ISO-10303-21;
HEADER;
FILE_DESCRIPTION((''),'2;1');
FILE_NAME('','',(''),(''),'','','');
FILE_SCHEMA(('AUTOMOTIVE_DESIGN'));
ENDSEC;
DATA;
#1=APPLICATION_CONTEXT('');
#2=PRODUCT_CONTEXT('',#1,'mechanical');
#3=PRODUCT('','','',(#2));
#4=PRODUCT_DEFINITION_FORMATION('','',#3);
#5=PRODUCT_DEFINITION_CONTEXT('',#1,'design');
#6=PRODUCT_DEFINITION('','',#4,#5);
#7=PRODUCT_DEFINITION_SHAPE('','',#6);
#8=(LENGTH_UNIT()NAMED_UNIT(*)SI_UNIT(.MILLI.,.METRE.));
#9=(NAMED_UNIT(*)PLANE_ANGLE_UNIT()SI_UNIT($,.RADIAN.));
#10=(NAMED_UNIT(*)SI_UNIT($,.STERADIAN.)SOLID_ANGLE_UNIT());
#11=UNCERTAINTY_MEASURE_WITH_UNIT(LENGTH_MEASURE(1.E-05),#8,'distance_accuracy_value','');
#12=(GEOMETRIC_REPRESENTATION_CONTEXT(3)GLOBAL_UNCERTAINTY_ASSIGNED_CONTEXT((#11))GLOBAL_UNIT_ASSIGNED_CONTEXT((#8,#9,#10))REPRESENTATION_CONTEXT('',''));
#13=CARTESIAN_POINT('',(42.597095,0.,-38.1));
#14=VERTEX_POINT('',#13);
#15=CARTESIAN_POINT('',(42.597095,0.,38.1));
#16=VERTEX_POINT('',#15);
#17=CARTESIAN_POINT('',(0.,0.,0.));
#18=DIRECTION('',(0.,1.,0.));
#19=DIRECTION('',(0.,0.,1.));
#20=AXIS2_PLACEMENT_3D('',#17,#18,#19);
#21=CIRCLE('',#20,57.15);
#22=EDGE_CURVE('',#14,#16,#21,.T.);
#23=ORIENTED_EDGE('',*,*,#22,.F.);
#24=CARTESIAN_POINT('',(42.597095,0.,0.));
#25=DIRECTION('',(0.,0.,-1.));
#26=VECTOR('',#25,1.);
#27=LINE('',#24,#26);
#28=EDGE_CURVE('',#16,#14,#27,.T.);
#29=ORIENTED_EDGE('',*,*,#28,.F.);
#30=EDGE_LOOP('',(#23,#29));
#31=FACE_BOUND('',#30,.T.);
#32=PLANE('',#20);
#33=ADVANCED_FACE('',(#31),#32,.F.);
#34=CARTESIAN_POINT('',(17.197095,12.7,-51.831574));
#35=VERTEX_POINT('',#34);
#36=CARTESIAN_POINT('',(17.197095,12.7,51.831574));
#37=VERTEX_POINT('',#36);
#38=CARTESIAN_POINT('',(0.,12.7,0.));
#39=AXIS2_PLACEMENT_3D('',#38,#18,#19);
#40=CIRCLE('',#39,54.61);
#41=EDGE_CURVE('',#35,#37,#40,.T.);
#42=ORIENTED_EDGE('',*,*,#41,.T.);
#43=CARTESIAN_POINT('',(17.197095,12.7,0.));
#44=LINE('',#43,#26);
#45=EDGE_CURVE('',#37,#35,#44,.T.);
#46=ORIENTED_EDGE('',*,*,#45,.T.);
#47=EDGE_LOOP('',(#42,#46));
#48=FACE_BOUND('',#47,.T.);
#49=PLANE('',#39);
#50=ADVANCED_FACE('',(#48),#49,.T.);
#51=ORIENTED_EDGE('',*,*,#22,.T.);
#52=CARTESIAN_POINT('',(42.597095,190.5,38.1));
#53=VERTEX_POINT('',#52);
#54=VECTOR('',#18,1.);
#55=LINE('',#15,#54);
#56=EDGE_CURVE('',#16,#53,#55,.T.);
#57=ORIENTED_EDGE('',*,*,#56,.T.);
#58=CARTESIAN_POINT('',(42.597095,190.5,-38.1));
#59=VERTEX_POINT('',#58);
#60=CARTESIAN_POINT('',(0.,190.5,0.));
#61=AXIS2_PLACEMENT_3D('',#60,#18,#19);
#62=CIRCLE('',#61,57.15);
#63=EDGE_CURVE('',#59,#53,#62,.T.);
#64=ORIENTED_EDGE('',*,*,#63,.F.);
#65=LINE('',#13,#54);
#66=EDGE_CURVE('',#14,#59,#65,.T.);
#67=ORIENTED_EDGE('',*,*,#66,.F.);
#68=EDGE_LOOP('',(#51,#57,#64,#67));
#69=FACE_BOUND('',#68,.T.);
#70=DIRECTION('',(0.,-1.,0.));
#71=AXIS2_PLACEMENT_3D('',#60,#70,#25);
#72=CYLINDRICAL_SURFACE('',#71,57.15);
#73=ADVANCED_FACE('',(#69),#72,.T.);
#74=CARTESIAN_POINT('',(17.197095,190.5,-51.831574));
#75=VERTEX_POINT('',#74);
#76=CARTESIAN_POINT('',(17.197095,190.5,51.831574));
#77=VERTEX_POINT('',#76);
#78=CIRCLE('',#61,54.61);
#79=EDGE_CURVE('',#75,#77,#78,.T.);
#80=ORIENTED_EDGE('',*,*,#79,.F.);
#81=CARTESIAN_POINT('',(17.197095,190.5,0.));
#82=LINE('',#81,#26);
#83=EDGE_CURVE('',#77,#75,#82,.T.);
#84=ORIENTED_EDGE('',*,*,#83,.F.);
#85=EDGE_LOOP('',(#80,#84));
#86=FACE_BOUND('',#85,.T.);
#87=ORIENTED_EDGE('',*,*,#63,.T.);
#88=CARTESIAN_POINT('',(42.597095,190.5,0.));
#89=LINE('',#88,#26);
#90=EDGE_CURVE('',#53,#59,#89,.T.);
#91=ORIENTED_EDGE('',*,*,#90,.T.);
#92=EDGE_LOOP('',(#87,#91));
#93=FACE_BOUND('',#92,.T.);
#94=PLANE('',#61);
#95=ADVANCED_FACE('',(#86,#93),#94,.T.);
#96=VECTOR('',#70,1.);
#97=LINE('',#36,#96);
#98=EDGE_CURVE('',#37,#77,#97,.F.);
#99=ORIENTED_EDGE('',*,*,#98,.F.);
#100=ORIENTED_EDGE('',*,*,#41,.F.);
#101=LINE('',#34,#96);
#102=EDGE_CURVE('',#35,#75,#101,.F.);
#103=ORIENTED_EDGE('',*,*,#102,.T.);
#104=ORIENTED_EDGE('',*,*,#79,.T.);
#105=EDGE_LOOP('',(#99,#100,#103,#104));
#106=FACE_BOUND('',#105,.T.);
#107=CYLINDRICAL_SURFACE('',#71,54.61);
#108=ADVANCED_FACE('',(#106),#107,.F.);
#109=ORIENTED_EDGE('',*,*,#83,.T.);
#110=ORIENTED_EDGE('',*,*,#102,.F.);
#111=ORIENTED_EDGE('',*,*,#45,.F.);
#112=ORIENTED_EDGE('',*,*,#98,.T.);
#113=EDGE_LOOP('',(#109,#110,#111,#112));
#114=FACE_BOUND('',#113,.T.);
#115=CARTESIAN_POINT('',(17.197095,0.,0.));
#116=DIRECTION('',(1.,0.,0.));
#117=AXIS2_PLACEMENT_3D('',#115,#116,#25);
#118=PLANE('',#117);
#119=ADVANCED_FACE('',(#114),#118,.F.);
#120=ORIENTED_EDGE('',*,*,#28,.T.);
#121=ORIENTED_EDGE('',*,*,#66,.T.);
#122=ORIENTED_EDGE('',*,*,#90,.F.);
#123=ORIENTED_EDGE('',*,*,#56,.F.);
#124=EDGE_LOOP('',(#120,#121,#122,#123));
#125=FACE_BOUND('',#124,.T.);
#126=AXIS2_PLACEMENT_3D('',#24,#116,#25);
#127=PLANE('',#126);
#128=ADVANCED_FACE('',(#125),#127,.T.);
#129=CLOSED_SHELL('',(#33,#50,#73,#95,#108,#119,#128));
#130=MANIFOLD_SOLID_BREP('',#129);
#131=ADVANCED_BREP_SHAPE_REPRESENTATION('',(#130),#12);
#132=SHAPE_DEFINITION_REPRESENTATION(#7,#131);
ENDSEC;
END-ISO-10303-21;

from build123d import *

# Parameters (mm, degrees)
SKETCH1_R           = 57.15
BOSS_EXTRUDE1_DEPTH = 190.5
CUT_EXTRUDE1_START  = -190.5
CUT_EXTRUDE1_DEPTH  = 190.5
SHELL2_START        = 12.7
SHELL2_DEPTH        = 177.8


# Read off the part's stored shape, not the designer's step: Shell2
with BuildPart() as part:
    # Sketch1 → Boss-Extrude1 (new body)
    with BuildSketch(Plane(origin=(0, 0, 0), x_dir=(1, 0, 0), z_dir=(0, 1, 0))):
        with Locations(Location((0, 0, 0), (0, 0, 270))):
            Circle(SKETCH1_R)
    extrude(amount=BOSS_EXTRUDE1_DEPTH)

    # Sketch2 → Cut-Extrude1 (cut)
    with BuildSketch(Plane(origin=(0, 190.5, 0), x_dir=(1, 0, 0), z_dir=(0, 1, 0)).offset(CUT_EXTRUDE1_START)):
        with BuildLine():
            Line((42.597094971, 38.1), (42.597094971, -38.1))
            ThreePointArc((42.597094971, -38.1), (53.387950315, -20.392382431), (57.15, 0))
            ThreePointArc((57.15, 0), (53.387950315, 20.392382431), (42.597094971, 38.1))
        make_face()
    extrude(amount=CUT_EXTRUDE1_DEPTH, mode=Mode.SUBTRACT)

    # Shell2 outline → Shell2 (cut)
    with BuildSketch(Plane(origin=(0, 0, 0), x_dir=(1, 0, 0), z_dir=(0, 1, 0)).offset(SHELL2_START)):
        with BuildLine():
            ThreePointArc((17.197094971, 51.831573626), (-54.61, 0), (17.197094971, -51.831573626))
            Line((17.197094971, -51.831573626), (17.197094971, 51.831573626))
        make_face()
    extrude(amount=SHELL2_DEPTH, mode=Mode.SUBTRACT)


solid = part.part
